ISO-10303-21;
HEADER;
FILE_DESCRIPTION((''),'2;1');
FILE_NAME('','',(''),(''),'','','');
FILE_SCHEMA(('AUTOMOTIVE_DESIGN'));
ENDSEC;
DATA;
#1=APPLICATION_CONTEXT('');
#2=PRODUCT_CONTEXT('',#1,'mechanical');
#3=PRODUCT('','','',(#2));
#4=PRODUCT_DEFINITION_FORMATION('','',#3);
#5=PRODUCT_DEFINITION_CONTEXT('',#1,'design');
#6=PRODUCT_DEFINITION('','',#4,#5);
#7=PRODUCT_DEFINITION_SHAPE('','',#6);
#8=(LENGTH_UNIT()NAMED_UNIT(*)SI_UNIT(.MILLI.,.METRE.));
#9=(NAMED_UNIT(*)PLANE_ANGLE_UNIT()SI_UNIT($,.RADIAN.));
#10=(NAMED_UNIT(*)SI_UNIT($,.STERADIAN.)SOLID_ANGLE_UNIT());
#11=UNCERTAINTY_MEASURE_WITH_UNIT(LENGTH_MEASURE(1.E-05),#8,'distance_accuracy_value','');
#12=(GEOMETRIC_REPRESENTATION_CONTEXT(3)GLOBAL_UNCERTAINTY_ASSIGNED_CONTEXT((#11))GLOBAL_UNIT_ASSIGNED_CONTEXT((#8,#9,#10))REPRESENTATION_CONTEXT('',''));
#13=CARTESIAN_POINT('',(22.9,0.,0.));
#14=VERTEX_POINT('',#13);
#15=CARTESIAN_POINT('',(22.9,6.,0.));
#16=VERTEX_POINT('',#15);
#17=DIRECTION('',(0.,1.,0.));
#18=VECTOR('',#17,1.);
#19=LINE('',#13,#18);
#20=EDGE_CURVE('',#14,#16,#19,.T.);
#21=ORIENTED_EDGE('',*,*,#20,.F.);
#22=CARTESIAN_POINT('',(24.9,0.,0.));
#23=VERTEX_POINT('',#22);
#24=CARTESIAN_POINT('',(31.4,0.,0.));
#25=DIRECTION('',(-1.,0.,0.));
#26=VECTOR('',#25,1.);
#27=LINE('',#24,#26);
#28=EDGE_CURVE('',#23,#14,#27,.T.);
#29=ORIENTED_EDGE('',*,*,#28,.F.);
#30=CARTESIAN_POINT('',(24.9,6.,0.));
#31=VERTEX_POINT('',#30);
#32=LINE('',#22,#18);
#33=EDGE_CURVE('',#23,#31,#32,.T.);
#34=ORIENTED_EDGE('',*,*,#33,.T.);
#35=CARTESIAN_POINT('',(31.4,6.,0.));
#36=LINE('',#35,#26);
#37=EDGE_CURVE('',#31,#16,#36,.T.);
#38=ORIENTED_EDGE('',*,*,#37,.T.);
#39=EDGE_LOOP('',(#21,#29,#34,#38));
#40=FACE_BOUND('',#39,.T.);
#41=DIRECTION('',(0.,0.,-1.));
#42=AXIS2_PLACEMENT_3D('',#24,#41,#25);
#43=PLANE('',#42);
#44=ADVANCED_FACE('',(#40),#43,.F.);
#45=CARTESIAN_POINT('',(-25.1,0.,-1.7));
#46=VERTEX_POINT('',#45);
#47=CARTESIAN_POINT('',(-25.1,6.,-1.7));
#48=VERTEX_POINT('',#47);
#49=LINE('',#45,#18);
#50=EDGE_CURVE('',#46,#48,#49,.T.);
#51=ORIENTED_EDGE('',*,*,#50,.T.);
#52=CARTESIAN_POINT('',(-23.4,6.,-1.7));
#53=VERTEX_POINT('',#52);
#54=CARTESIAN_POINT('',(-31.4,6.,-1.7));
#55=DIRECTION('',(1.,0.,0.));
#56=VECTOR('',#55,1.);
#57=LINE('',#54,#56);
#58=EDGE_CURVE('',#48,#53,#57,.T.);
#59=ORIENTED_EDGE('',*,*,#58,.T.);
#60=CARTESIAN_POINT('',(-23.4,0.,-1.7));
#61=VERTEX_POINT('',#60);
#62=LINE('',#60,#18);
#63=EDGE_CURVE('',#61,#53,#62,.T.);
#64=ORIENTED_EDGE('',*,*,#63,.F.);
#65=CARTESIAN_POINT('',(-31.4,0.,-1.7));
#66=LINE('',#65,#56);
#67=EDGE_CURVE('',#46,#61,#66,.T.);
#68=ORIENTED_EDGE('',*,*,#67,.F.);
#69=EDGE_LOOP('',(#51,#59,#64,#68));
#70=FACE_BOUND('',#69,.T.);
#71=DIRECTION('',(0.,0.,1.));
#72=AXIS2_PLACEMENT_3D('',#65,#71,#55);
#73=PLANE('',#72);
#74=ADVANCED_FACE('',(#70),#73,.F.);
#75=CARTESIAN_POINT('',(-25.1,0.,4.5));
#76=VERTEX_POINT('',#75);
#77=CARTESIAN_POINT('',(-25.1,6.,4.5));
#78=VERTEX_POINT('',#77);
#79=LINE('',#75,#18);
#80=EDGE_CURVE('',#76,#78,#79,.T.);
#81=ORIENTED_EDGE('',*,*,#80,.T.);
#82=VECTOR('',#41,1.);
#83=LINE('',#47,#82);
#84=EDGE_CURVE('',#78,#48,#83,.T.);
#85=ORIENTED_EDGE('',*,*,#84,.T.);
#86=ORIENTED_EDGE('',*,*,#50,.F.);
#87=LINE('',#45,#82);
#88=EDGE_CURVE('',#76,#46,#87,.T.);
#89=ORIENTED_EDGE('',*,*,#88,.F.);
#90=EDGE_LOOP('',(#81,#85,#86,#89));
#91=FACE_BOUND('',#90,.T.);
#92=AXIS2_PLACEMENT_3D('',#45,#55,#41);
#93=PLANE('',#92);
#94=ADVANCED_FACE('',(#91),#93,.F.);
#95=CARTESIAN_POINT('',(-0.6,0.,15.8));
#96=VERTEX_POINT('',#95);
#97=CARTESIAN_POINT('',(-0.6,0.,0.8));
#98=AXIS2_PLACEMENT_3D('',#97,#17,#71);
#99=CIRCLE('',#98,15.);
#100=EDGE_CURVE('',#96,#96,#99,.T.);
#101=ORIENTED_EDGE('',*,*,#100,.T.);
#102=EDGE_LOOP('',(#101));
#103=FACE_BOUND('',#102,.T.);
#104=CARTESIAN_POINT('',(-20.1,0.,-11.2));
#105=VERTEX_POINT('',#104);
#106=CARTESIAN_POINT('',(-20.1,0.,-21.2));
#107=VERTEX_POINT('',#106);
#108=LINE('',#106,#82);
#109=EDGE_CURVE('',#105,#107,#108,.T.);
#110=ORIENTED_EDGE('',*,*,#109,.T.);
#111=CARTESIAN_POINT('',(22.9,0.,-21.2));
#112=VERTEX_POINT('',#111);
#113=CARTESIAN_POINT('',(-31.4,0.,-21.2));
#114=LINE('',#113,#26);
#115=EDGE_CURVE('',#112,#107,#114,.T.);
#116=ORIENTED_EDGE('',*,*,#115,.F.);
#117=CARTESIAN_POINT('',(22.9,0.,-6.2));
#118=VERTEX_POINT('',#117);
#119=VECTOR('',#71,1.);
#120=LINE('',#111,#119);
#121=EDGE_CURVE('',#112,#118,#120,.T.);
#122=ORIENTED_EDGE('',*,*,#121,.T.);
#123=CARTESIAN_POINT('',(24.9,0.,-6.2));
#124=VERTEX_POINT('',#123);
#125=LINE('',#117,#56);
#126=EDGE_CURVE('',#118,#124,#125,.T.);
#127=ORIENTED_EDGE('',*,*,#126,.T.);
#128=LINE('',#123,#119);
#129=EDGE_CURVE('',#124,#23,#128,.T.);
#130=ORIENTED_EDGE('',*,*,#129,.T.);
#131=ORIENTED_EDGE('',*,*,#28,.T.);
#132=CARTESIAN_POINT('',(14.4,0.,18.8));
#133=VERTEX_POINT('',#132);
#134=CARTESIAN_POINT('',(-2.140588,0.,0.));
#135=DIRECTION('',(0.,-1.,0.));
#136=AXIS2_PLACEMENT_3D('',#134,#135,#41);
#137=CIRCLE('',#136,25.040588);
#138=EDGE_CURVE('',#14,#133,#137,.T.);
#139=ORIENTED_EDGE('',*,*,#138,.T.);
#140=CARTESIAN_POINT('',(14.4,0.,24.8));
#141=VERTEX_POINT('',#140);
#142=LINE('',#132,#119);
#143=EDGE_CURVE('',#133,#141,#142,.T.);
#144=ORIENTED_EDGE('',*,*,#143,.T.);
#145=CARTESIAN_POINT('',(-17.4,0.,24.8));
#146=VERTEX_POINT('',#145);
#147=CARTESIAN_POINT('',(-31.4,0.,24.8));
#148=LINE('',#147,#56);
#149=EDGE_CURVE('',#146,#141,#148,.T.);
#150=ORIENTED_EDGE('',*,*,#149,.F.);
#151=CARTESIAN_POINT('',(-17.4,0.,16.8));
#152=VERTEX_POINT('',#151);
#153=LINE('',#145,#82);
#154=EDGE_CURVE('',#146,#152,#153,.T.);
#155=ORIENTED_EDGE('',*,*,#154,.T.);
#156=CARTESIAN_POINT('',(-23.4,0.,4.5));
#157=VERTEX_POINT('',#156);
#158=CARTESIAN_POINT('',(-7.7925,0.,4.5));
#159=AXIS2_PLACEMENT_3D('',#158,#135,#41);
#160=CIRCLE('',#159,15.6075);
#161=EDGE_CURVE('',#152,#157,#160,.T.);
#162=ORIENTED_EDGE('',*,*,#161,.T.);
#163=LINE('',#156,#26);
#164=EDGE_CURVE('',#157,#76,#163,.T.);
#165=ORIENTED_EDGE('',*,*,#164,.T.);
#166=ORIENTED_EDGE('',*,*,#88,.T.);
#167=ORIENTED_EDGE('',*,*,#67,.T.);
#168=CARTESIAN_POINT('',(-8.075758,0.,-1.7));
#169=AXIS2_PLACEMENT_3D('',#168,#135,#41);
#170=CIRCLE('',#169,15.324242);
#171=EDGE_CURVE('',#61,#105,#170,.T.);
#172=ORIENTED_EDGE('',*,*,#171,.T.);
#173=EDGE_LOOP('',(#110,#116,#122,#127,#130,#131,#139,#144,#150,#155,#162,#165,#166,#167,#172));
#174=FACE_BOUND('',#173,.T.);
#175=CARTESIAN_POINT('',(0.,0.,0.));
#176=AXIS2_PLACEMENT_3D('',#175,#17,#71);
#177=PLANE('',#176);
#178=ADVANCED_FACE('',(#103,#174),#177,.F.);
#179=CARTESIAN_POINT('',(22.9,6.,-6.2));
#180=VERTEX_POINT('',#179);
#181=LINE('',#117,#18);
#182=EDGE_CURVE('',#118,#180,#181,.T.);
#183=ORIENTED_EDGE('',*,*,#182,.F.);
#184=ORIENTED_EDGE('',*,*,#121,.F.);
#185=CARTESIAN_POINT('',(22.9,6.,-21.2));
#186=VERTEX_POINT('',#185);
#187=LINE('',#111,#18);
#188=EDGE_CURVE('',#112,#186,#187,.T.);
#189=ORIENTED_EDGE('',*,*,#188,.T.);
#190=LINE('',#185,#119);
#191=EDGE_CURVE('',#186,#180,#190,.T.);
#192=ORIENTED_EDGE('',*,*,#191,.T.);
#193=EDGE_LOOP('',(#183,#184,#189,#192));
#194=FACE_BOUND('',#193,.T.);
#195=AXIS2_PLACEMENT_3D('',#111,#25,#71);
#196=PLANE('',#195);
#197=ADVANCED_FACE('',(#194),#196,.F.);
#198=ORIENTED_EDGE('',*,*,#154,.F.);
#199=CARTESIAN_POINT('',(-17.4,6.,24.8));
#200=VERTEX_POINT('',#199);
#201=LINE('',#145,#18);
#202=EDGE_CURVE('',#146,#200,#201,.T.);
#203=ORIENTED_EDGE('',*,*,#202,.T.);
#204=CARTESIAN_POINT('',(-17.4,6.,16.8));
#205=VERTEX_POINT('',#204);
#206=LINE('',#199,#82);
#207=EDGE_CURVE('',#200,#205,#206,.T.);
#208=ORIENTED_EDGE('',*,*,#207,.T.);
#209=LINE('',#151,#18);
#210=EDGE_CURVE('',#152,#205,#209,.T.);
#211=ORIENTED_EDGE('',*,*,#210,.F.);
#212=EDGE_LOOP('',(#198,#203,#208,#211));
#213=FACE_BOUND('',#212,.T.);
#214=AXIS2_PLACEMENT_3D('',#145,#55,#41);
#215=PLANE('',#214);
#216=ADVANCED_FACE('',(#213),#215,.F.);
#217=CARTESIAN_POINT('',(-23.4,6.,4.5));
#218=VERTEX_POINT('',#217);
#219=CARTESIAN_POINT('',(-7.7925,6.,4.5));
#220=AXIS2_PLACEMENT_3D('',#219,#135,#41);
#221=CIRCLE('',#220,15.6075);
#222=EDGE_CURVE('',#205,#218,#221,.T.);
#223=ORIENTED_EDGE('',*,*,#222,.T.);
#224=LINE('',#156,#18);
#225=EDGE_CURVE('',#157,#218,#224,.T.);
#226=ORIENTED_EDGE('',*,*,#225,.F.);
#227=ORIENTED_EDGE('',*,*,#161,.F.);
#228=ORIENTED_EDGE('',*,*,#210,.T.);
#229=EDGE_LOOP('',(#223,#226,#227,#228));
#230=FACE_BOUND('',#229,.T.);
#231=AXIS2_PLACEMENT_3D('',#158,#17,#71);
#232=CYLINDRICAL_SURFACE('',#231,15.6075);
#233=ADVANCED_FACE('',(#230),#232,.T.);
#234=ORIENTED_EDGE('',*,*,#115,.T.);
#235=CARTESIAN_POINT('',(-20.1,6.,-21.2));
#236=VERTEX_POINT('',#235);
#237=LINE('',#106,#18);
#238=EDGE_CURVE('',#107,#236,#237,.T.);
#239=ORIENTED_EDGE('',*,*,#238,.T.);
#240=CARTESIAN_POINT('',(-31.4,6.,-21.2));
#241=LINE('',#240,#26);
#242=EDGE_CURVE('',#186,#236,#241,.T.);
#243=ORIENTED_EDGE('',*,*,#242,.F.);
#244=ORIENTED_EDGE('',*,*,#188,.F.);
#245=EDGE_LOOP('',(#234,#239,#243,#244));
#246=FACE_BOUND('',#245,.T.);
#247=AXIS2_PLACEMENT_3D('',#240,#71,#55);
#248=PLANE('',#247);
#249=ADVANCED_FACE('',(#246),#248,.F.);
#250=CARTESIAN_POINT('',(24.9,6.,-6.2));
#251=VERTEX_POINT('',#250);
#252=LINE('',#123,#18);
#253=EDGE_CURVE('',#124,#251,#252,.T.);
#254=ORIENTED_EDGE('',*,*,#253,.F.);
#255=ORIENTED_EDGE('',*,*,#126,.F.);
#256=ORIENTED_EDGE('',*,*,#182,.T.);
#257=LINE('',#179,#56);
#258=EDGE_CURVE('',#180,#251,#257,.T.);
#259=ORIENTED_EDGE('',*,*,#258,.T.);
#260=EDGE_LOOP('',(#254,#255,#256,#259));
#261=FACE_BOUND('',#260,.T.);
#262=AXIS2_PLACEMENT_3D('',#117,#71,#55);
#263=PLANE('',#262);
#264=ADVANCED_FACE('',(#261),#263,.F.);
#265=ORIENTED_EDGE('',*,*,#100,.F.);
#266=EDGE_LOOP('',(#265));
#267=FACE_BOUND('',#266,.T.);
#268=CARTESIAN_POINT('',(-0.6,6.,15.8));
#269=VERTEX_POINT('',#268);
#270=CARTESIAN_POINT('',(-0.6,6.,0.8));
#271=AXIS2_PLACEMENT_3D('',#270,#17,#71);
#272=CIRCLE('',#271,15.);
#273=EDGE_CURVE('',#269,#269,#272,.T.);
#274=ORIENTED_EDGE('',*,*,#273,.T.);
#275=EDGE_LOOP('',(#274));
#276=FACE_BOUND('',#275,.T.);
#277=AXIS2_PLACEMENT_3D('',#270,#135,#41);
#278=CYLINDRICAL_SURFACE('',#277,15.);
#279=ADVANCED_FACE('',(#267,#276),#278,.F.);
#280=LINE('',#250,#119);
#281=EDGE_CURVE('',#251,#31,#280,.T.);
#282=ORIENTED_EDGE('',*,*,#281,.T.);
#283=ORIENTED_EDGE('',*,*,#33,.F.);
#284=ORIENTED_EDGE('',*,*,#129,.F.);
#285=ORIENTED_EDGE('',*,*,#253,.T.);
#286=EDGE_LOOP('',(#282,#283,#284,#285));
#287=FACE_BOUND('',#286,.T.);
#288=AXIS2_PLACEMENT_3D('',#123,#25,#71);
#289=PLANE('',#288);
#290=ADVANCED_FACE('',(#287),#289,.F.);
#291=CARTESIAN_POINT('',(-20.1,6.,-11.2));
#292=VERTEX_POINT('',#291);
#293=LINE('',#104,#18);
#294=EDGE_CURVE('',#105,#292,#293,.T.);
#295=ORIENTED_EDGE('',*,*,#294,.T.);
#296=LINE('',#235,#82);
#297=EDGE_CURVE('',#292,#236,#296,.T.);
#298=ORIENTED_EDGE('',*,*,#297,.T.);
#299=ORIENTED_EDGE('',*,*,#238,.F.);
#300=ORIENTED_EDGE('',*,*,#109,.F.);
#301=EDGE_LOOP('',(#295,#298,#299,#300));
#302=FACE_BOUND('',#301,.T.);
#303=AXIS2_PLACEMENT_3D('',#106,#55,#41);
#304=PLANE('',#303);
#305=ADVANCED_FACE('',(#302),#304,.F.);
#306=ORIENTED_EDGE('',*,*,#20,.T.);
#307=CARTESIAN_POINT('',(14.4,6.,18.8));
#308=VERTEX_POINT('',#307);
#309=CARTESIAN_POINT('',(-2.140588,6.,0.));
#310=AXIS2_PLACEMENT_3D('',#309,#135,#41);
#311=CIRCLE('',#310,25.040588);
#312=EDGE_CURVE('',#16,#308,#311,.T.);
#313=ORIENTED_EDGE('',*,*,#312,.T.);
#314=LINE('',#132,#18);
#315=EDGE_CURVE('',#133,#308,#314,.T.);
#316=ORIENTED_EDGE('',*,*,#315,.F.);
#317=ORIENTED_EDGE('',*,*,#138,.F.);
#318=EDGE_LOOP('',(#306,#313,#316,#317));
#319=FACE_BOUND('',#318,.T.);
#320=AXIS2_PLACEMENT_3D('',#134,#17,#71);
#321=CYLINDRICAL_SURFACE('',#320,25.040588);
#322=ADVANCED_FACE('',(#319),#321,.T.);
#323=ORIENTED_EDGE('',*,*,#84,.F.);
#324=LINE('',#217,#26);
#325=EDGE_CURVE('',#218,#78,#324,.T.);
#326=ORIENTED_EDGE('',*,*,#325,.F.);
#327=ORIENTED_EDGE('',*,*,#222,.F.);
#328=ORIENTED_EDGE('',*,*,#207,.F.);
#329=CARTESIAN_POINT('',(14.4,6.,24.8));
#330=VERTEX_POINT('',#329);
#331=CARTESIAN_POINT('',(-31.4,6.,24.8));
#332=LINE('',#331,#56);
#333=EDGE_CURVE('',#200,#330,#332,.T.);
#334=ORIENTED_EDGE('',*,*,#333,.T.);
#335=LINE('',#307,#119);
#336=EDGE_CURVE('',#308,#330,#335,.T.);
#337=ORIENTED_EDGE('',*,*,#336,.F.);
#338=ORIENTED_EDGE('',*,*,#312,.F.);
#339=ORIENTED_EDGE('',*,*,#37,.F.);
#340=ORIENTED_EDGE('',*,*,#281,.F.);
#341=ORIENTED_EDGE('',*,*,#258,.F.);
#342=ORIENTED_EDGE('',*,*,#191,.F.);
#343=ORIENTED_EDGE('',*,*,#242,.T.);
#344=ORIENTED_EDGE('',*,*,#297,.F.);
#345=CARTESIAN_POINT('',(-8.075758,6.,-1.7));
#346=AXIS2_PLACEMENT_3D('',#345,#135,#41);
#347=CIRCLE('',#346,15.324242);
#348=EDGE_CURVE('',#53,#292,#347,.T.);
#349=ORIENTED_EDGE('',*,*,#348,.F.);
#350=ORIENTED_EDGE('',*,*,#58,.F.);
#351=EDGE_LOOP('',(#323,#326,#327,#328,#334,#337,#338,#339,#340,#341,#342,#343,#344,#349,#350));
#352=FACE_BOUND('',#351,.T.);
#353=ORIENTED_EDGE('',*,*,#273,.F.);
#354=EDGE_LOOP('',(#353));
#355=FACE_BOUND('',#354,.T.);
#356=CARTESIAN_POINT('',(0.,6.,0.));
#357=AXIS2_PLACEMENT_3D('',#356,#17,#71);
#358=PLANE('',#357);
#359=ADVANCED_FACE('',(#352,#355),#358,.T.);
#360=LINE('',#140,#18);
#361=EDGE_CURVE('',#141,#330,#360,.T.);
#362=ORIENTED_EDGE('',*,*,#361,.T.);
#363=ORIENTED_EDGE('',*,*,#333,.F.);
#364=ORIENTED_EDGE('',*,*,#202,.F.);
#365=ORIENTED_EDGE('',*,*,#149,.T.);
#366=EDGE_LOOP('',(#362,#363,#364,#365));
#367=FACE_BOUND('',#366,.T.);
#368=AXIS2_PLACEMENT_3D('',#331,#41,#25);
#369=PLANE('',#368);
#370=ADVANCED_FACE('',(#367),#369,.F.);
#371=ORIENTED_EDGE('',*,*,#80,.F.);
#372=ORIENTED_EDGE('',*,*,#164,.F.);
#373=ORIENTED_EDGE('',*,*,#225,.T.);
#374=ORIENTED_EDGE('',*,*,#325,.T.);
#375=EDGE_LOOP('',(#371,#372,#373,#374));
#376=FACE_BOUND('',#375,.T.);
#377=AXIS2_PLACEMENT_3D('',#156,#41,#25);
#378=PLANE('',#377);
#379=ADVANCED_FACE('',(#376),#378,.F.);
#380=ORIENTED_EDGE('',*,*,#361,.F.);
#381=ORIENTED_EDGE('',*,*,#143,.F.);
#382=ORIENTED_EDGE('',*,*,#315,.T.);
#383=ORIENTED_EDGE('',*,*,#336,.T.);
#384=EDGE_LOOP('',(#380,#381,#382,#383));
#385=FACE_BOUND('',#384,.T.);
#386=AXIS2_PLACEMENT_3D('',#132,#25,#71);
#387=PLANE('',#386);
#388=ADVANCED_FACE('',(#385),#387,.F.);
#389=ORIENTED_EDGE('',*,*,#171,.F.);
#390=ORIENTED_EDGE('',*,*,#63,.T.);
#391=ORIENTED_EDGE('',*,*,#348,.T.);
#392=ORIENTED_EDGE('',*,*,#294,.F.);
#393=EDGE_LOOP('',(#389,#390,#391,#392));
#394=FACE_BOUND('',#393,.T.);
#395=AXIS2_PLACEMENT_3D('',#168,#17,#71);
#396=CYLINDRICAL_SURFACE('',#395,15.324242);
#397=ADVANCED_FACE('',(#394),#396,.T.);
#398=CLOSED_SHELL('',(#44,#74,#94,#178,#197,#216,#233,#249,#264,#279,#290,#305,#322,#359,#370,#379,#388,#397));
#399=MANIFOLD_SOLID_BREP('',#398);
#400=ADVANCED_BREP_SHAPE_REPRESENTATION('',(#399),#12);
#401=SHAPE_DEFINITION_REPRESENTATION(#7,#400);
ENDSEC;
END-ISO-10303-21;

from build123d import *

# Parameters (mm, degrees)
SKETCH1_W           = 62.8
SKETCH1_H           = 46
SKETCH1_R           = 1.4
SKETCH1_R_2         = 15
BOSS_EXTRUDE1_DEPTH = 6
SKETCH2_W           = 8.5
SKETCH2_H           = 15
CUT_EXTRUDE1_DEPTH  = 41.459856648
FILLET1_R           = 3.1
CUT_EXTRUDE2_DEPTH  = 41.459856648


with BuildPart() as part:
    # Sketch1 → Boss-Extrude1 (new body)
    with BuildSketch(Plane(origin=(0, 0, 0), x_dir=(1, 0, 0), z_dir=(0, 1, 0))):
        with Locations((0, -1.8)):
            Rectangle(SKETCH1_W, SKETCH1_H)
        with Locations(Location((-28.3, -1.4, 0), (0, 0, 270))):
            Circle(SKETCH1_R, mode=Mode.SUBTRACT)
        with Locations(Location((28.3, 3.1, 0), (0, 0, 270))):
            Circle(SKETCH1_R, mode=Mode.SUBTRACT)
        with Locations(Location((-0.6, -0.8, 0), (0, 0, 270))):
            Circle(SKETCH1_R_2, mode=Mode.SUBTRACT)
    extrude(amount=BOSS_EXTRUDE1_DEPTH)

    # Sketch2 → Cut-Extrude1 (cut, through all)
    with BuildSketch(Plane(origin=(0, 6, 0), x_dir=(1, 0, 0), z_dir=(0, 1, 0))):
        with Locations((27.15, 13.7)):
            Rectangle(SKETCH2_W, SKETCH2_H)
        with BuildLine():
            Line((14.4, -24.8), (31.4, -24.8))
            Line((31.4, -24.8), (31.4, 0))
            Line((31.4, 0), (22.9, 0))
            ThreePointArc((22.9, 0), (20.676259907, -10.31612815), (14.4, -18.8))
            Line((14.4, -18.8), (14.4, -24.8))
        make_face()
        with BuildLine():
            Line((-17.4, -24.8), (-17.4, -16.8))
            ThreePointArc((-17.4, -16.8), (-21.820028515, -11.342696837), (-23.4, -4.5))
            Line((-23.4, -4.5), (-31.4, -4.5))
            Line((-31.4, -4.5), (-31.4, -24.8))
            Line((-31.4, -24.8), (-17.4, -24.8))
        make_face()
        with BuildLine():
            Line((-20.1, 21.2), (-20.1, 11.2))
            ThreePointArc((-20.1, 11.2), (-22.551509918, 6.728419235), (-23.4, 1.7))
            Line((-23.4, 1.7), (-31.4, 1.7))
            Line((-31.4, 1.7), (-31.4, 21.2))
            Line((-31.4, 21.2), (-20.1, 21.2))
        make_face()
    extrude(amount=-CUT_EXTRUDE1_DEPTH, mode=Mode.SUBTRACT)

    # Fillet1
    fillet1_edges = [part.edges().sort_by_distance(p)[0] for p in [
        (-31.4, 3, 4.5),
        (-31.4, 3, -1.7),
        (31.4, 3, -6.2),
        (31.4, 3, 0),
    ]]
    fillet(fillet1_edges, radius=FILLET1_R - 0.0001)  # a hair under: the kernel refuses the full size

    # Sketch3 → Cut-Extrude2 (cut, through all)
    with BuildSketch(Plane(origin=(0, 6, 0), x_dir=(1, 0, 0), z_dir=(0, 1, 0))):
        with BuildLine():
            Line((28.3, 0), (24.9, 0))
            Line((24.9, 0), (24.9, 6.2))
            Line((24.9, 6.2), (28.3, 6.2))
            ThreePointArc((28.3, 6.2), (30.492031022, 5.292031022), (31.4, 3.1))
            ThreePointArc((31.4, 3.1), (30.492031022, 0.907968978), (28.3, 0))
        make_face()
        with BuildLine():
            Line((-25.1, -4.5), (-28.3, -4.5))
            ThreePointArc((-28.3, -4.5), (-30.492031022, -3.592031022), (-31.4, -1.4))
            ThreePointArc((-31.4, -1.4), (-30.492031022, 0.792031022), (-28.3, 1.7))
            Line((-28.3, 1.7), (-25.1, 1.7))
            Line((-25.1, 1.7), (-25.1, -4.5))
        make_face()
    extrude(amount=-CUT_EXTRUDE2_DEPTH, mode=Mode.SUBTRACT)


with BuildPart() as cut_extrude2_kept_piece:
    # of the separate pieces the step leaves, the one the design keeps (cut_extrude2_pieces_kept)
    add(part.part.solids().sort_by_distance((-23.4, 0, 4.5))[0])


solid = cut_extrude2_kept_piece.part
